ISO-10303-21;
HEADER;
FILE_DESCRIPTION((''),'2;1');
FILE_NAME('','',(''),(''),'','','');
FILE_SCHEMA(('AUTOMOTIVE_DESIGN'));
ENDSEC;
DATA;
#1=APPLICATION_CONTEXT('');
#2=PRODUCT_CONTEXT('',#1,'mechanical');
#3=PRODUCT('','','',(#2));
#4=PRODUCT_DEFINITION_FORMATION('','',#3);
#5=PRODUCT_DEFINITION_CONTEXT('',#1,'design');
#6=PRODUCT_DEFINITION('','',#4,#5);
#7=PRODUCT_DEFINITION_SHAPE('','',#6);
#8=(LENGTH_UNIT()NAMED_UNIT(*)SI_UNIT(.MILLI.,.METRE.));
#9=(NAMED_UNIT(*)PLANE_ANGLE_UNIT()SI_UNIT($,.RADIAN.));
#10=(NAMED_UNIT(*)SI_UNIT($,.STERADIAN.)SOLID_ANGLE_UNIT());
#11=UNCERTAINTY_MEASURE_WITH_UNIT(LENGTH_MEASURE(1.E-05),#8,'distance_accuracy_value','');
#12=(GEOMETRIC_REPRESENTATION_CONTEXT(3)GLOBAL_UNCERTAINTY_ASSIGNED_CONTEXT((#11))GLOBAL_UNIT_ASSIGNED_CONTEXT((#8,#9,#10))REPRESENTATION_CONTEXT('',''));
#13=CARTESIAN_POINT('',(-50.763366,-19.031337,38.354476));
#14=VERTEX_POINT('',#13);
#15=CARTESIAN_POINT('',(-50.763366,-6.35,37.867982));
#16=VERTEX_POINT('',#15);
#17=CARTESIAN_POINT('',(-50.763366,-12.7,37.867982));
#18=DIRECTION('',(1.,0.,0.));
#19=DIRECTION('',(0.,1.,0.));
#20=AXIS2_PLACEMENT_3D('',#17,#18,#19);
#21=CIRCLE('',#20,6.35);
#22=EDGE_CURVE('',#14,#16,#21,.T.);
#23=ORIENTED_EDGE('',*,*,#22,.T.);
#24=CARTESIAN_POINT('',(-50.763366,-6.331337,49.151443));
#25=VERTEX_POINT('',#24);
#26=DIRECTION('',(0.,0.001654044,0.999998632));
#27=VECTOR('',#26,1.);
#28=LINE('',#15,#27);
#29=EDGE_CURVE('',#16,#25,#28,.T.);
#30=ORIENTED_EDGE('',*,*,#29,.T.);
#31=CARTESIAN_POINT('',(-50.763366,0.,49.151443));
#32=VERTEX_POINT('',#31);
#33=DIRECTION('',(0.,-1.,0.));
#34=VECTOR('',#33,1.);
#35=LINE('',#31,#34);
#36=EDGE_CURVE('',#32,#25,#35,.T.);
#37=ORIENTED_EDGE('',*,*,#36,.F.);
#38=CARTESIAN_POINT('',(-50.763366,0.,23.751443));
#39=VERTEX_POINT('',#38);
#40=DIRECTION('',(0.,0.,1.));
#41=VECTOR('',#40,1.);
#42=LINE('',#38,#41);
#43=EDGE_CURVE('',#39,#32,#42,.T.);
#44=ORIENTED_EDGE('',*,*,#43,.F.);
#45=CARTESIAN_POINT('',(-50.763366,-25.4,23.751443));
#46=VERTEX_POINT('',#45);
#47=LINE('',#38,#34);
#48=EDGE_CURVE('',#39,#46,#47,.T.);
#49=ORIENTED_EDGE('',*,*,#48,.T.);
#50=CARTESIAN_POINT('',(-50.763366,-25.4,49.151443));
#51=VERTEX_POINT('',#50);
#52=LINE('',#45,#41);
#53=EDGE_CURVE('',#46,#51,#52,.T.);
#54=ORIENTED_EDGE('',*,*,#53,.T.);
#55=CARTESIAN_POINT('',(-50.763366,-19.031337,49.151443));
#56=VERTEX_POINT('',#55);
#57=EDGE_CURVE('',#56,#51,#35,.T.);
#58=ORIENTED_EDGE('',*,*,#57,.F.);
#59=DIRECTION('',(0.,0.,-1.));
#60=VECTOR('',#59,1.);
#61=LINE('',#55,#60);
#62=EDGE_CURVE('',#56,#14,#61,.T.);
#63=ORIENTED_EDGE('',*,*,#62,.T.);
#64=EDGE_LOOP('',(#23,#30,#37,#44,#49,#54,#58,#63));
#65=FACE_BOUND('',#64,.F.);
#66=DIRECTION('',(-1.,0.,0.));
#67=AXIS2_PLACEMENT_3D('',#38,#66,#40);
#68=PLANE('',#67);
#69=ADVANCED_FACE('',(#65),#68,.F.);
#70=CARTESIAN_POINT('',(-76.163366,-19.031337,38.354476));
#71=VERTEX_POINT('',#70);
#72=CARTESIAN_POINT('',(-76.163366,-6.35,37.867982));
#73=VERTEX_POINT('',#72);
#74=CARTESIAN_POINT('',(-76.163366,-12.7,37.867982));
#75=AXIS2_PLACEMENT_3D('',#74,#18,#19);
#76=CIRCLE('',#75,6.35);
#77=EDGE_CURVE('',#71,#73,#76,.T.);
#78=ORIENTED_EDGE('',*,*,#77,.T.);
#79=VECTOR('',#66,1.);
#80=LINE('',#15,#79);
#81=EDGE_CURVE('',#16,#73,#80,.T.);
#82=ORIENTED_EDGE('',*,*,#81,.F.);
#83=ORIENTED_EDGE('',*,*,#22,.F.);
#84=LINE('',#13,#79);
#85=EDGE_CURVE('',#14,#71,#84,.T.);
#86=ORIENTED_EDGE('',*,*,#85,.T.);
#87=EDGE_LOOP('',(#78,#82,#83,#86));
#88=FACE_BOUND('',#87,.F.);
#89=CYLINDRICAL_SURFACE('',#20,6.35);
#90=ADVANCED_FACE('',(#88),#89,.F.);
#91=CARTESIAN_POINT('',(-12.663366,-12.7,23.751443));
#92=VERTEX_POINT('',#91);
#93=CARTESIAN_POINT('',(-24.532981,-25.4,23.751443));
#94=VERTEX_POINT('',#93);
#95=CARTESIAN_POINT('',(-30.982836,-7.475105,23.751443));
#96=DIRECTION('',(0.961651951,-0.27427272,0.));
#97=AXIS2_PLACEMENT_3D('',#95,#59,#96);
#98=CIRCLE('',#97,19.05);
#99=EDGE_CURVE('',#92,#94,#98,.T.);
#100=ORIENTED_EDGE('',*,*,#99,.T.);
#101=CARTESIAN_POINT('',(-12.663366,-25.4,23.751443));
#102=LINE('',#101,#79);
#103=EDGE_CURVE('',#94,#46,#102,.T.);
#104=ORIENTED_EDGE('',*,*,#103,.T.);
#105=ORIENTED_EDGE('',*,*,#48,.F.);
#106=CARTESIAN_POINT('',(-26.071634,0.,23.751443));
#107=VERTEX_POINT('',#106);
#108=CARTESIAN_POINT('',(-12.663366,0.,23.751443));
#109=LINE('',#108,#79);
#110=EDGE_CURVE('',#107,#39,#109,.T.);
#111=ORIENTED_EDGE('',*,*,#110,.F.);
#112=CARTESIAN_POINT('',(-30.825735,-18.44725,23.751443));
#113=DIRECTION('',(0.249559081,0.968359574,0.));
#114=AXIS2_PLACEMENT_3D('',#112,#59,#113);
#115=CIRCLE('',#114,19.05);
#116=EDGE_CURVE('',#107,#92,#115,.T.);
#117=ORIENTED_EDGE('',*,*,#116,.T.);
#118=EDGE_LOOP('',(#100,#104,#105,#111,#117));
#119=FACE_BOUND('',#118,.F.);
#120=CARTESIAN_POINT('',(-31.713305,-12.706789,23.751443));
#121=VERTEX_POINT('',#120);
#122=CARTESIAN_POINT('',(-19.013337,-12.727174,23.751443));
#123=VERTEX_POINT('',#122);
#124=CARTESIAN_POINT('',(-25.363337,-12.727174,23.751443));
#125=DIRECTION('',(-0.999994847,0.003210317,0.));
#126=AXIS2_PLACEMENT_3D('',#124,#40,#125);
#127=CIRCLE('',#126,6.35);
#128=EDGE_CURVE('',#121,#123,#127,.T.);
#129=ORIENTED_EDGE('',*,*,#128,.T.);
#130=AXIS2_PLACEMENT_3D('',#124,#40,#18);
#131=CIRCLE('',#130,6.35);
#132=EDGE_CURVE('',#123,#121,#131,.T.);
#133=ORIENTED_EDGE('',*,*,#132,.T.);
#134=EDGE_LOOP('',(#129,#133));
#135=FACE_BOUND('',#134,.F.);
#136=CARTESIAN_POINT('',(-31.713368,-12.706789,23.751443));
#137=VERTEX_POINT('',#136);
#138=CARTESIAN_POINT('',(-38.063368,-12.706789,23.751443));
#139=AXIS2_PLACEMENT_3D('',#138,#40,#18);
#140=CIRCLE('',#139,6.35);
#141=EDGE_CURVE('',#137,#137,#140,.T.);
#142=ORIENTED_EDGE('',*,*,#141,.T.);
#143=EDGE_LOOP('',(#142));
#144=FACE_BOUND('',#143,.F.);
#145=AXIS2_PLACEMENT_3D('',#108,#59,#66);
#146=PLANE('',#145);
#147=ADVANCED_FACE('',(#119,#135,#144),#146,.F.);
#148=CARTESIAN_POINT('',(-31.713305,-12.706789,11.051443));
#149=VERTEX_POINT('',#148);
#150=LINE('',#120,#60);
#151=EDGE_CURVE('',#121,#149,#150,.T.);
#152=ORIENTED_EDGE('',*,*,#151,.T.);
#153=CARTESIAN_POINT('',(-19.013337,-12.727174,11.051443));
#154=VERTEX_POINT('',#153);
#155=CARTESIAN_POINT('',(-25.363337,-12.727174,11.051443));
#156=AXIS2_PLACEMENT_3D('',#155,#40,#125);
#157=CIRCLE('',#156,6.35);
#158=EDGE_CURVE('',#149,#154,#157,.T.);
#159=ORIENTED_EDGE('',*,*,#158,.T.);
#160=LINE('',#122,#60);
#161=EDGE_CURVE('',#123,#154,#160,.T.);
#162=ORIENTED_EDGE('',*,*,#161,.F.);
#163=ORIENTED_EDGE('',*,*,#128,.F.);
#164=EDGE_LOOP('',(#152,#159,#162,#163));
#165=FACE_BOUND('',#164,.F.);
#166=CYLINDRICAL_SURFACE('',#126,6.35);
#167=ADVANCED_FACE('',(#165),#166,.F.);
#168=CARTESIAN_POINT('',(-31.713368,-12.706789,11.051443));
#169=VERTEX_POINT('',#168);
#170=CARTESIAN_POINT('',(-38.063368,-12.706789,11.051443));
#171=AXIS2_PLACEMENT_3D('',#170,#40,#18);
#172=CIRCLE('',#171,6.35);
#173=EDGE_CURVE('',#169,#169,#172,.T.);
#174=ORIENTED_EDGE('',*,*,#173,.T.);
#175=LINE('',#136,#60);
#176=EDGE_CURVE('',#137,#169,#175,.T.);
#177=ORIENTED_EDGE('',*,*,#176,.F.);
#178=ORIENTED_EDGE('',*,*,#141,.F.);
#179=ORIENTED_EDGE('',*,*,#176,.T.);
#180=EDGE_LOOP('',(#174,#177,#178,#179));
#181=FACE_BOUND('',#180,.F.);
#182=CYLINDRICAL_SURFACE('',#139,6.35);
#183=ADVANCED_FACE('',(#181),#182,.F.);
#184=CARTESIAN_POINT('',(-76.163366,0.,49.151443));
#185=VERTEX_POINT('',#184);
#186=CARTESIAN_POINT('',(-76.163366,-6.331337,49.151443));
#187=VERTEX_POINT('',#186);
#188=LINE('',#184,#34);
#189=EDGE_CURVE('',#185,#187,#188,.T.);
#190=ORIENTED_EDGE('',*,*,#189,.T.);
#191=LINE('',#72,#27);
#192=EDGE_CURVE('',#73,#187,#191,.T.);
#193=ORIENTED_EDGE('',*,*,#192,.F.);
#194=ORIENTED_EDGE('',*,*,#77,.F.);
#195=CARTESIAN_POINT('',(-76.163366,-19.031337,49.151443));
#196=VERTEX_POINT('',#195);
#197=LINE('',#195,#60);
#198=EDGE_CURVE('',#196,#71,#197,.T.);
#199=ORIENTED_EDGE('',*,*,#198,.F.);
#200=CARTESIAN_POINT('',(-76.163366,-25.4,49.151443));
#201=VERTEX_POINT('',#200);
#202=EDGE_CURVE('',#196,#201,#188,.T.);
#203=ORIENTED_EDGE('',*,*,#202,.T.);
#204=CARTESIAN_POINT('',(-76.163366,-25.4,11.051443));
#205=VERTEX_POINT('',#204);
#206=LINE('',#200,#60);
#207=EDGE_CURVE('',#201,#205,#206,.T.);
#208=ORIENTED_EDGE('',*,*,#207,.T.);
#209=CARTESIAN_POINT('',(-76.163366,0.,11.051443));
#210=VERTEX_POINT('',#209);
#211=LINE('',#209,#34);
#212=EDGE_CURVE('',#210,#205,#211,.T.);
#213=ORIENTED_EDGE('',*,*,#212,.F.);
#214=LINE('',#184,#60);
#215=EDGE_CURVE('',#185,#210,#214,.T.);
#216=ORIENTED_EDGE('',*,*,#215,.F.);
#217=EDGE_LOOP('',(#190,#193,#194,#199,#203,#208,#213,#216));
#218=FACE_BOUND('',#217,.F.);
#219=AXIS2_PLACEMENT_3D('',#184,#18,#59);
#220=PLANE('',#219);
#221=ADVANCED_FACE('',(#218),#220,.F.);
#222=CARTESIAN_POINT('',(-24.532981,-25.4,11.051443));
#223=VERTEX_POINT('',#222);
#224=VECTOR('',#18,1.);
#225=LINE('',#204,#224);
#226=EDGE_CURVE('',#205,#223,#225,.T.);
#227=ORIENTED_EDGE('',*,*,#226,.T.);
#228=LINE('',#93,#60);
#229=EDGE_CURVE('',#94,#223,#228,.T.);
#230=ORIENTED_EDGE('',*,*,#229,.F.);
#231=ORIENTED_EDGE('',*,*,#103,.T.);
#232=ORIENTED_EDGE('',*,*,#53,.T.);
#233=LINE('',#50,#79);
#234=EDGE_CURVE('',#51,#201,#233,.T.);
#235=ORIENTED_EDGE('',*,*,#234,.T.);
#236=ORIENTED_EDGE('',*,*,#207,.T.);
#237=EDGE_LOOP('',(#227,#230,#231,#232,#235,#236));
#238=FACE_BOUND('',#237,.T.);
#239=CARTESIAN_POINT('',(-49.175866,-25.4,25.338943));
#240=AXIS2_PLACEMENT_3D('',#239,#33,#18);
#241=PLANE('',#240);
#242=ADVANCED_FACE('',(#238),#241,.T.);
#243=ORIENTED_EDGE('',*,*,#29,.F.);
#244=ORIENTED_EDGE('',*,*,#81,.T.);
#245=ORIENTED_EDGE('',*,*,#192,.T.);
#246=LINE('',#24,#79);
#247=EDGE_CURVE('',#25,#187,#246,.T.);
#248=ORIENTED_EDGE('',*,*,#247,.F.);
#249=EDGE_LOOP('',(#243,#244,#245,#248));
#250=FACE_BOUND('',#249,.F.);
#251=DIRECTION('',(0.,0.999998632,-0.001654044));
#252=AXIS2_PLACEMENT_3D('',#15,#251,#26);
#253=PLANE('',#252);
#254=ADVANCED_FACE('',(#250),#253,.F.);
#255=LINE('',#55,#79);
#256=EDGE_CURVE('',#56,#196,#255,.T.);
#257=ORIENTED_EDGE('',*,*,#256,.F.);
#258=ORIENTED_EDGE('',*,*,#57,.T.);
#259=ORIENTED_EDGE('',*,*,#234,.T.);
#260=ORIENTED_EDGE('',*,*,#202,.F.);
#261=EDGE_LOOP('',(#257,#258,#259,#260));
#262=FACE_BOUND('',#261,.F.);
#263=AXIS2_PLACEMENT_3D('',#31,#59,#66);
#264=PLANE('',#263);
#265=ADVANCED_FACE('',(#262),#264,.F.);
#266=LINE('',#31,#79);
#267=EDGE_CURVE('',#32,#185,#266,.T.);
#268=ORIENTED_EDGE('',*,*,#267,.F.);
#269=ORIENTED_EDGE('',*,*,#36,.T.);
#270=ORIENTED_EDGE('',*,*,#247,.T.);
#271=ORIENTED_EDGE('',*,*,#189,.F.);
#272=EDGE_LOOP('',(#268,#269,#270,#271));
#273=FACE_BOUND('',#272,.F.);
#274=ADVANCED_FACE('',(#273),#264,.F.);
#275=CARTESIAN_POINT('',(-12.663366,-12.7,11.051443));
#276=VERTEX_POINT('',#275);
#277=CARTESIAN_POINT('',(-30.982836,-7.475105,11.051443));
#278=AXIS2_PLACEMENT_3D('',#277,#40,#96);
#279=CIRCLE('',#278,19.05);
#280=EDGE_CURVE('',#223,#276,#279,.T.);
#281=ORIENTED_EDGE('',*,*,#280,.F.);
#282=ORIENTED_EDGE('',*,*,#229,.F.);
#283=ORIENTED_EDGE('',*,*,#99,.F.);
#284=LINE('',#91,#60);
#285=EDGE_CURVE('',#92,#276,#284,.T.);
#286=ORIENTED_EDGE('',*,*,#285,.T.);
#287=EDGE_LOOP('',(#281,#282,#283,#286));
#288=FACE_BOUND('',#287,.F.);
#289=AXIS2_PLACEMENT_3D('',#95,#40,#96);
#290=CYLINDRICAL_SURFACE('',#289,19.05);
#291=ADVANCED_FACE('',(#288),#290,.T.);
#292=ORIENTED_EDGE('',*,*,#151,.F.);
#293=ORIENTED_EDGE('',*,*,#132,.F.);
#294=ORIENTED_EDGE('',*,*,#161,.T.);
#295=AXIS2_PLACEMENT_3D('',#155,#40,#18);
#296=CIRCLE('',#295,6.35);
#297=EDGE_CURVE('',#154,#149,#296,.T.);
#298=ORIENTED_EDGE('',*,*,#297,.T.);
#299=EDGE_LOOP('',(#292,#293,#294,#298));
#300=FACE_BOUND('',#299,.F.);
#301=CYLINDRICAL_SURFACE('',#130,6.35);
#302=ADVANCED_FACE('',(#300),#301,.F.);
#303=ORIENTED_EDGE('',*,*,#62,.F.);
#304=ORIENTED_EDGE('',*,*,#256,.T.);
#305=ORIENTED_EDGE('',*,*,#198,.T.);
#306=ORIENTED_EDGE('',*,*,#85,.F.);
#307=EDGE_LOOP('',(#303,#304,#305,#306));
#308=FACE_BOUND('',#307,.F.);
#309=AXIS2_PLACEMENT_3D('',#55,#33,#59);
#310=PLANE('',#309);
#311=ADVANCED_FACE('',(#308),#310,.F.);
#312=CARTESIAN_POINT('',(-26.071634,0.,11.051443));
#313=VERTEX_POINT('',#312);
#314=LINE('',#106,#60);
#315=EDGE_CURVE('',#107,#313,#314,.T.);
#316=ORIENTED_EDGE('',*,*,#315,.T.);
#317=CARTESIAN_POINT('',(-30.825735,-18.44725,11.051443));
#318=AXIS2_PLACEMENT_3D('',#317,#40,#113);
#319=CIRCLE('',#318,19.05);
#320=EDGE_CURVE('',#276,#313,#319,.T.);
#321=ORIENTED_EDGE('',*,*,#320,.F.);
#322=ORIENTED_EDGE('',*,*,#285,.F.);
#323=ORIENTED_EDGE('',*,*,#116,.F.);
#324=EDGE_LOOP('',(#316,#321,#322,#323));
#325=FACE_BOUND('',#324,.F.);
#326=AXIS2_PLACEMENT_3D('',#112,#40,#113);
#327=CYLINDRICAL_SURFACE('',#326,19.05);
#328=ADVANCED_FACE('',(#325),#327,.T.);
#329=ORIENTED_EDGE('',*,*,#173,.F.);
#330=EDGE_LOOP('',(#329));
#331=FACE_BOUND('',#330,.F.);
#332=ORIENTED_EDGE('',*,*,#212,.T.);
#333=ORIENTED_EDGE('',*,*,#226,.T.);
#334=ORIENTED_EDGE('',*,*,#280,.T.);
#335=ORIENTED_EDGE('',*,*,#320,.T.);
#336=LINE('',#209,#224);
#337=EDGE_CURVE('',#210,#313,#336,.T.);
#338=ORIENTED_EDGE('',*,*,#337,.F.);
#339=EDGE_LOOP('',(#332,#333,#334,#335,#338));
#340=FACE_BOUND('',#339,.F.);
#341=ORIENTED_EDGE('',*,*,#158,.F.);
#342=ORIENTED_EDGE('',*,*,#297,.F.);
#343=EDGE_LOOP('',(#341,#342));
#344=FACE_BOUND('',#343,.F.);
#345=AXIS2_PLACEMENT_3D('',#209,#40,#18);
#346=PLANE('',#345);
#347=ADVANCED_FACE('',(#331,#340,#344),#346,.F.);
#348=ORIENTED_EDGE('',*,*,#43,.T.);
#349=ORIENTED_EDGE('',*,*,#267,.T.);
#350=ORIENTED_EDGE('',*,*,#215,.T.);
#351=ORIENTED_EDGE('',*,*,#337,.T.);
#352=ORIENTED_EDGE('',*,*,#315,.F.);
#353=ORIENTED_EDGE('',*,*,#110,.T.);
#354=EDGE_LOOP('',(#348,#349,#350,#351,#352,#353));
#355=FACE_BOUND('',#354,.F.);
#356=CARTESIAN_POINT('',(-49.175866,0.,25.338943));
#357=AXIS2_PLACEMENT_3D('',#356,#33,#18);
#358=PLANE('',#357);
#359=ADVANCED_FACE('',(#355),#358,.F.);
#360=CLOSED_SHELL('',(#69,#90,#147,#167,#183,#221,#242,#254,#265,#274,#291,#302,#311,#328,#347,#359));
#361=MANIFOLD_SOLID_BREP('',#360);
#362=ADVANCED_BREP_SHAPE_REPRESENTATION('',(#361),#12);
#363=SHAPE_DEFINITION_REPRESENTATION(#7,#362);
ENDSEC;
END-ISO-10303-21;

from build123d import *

# Parameters (mm, degrees)
F1_DEPTH = 25.4
F3_DEPTH = 25.4
F4_R     = 6.35
F5_DEPTH = 25.4
F6_R     = 6.35
F7_DEPTH = 25.401
F9_DEPTH = 25.4


# Not quite as in the source:
# - ends of sketch curves that miss each other by under 0.0002 mm in the source are joined


with BuildPart() as f1:
    # F0 (on Front) → F1 (new body)
    with BuildSketch(Plane.XZ):
        Polygon((-76.163366437, 49.151442945), (-76.163366437, 11.051442945), (-12.663366437, 11.051442945), (-12.663366437, 23.751442945), (-50.763366437, 23.751442945), (-50.763366437, 49.151442945), align=None)
    extrude(amount=F1_DEPTH)

    # F2 (on face) → F3 (cut)
    with BuildSketch(Plane.XY.offset(23.751442945)):
        with BuildLine():
            ThreePointArc((-26.0716341436, 0), (-17.7255959226, -4.6165280857), (-12.663366437, -12.7))
            Line((-12.663366437, -12.7), (-12.663366437, 0))
            Line((-12.663366437, 0), (-26.0716341436, 0))
        make_face()
        with BuildLine():
            Line((-12.663366437, -25.4), (-12.663366437, -12.7))
            ThreePointArc((-12.663366437, -12.7), (-17.065136592, -20.482800112), (-24.5329812169, -25.4))
            Line((-24.5329812169, -25.4), (-12.663366437, -25.4))
        make_face()
    extrude(amount=-F3_DEPTH, mode=Mode.SUBTRACT)

    # F4 (on face) → F5 (cut)
    with BuildSketch(Plane.XY.offset(23.751442945)):
        with BuildLine():
            ThreePointArc((-19.0133373642, -12.7271744008), (-25.3531445932, -6.3771825813), (-31.7133046421, -12.7067888852))
            ThreePointArc((-31.7133046421, -12.7067888852), (-25.3735301351, -19.0771662202), (-19.0133373642, -12.7271744008))
        make_face()
        with Locations((-38.0633682514, -12.706788681)):
            Circle(F4_R)
    extrude(amount=-F5_DEPTH, mode=Mode.SUBTRACT)

    # F6 (on face) → F7 (cut, through all)
    with BuildSketch(Plane.YZ.offset(-50.763366437)):
        with Locations((-12.7, 37.8679819405)):
            Circle(F6_R)
    extrude(amount=-F7_DEPTH, mode=Mode.SUBTRACT)

    # F8 (on face) → F9 (cut)
    with BuildSketch(Plane.YZ.offset(-50.763366437)):
        with BuildLine():
            Line((-19.0313366339, 49.151442945), (-19.0313366339, 38.3544759569))
            ThreePointArc((-19.0313366339, 38.3544759569), (-12.456574062, 44.2133143835), (-6.35, 37.8679819405))
            Line((-6.35, 37.8679819405), (-6.3313366339, 49.151442945))
            Line((-6.3313366339, 49.151442945), (-19.0313366339, 49.151442945))
        make_face()
    extrude(amount=-F9_DEPTH, mode=Mode.SUBTRACT)


solid = f1.part
